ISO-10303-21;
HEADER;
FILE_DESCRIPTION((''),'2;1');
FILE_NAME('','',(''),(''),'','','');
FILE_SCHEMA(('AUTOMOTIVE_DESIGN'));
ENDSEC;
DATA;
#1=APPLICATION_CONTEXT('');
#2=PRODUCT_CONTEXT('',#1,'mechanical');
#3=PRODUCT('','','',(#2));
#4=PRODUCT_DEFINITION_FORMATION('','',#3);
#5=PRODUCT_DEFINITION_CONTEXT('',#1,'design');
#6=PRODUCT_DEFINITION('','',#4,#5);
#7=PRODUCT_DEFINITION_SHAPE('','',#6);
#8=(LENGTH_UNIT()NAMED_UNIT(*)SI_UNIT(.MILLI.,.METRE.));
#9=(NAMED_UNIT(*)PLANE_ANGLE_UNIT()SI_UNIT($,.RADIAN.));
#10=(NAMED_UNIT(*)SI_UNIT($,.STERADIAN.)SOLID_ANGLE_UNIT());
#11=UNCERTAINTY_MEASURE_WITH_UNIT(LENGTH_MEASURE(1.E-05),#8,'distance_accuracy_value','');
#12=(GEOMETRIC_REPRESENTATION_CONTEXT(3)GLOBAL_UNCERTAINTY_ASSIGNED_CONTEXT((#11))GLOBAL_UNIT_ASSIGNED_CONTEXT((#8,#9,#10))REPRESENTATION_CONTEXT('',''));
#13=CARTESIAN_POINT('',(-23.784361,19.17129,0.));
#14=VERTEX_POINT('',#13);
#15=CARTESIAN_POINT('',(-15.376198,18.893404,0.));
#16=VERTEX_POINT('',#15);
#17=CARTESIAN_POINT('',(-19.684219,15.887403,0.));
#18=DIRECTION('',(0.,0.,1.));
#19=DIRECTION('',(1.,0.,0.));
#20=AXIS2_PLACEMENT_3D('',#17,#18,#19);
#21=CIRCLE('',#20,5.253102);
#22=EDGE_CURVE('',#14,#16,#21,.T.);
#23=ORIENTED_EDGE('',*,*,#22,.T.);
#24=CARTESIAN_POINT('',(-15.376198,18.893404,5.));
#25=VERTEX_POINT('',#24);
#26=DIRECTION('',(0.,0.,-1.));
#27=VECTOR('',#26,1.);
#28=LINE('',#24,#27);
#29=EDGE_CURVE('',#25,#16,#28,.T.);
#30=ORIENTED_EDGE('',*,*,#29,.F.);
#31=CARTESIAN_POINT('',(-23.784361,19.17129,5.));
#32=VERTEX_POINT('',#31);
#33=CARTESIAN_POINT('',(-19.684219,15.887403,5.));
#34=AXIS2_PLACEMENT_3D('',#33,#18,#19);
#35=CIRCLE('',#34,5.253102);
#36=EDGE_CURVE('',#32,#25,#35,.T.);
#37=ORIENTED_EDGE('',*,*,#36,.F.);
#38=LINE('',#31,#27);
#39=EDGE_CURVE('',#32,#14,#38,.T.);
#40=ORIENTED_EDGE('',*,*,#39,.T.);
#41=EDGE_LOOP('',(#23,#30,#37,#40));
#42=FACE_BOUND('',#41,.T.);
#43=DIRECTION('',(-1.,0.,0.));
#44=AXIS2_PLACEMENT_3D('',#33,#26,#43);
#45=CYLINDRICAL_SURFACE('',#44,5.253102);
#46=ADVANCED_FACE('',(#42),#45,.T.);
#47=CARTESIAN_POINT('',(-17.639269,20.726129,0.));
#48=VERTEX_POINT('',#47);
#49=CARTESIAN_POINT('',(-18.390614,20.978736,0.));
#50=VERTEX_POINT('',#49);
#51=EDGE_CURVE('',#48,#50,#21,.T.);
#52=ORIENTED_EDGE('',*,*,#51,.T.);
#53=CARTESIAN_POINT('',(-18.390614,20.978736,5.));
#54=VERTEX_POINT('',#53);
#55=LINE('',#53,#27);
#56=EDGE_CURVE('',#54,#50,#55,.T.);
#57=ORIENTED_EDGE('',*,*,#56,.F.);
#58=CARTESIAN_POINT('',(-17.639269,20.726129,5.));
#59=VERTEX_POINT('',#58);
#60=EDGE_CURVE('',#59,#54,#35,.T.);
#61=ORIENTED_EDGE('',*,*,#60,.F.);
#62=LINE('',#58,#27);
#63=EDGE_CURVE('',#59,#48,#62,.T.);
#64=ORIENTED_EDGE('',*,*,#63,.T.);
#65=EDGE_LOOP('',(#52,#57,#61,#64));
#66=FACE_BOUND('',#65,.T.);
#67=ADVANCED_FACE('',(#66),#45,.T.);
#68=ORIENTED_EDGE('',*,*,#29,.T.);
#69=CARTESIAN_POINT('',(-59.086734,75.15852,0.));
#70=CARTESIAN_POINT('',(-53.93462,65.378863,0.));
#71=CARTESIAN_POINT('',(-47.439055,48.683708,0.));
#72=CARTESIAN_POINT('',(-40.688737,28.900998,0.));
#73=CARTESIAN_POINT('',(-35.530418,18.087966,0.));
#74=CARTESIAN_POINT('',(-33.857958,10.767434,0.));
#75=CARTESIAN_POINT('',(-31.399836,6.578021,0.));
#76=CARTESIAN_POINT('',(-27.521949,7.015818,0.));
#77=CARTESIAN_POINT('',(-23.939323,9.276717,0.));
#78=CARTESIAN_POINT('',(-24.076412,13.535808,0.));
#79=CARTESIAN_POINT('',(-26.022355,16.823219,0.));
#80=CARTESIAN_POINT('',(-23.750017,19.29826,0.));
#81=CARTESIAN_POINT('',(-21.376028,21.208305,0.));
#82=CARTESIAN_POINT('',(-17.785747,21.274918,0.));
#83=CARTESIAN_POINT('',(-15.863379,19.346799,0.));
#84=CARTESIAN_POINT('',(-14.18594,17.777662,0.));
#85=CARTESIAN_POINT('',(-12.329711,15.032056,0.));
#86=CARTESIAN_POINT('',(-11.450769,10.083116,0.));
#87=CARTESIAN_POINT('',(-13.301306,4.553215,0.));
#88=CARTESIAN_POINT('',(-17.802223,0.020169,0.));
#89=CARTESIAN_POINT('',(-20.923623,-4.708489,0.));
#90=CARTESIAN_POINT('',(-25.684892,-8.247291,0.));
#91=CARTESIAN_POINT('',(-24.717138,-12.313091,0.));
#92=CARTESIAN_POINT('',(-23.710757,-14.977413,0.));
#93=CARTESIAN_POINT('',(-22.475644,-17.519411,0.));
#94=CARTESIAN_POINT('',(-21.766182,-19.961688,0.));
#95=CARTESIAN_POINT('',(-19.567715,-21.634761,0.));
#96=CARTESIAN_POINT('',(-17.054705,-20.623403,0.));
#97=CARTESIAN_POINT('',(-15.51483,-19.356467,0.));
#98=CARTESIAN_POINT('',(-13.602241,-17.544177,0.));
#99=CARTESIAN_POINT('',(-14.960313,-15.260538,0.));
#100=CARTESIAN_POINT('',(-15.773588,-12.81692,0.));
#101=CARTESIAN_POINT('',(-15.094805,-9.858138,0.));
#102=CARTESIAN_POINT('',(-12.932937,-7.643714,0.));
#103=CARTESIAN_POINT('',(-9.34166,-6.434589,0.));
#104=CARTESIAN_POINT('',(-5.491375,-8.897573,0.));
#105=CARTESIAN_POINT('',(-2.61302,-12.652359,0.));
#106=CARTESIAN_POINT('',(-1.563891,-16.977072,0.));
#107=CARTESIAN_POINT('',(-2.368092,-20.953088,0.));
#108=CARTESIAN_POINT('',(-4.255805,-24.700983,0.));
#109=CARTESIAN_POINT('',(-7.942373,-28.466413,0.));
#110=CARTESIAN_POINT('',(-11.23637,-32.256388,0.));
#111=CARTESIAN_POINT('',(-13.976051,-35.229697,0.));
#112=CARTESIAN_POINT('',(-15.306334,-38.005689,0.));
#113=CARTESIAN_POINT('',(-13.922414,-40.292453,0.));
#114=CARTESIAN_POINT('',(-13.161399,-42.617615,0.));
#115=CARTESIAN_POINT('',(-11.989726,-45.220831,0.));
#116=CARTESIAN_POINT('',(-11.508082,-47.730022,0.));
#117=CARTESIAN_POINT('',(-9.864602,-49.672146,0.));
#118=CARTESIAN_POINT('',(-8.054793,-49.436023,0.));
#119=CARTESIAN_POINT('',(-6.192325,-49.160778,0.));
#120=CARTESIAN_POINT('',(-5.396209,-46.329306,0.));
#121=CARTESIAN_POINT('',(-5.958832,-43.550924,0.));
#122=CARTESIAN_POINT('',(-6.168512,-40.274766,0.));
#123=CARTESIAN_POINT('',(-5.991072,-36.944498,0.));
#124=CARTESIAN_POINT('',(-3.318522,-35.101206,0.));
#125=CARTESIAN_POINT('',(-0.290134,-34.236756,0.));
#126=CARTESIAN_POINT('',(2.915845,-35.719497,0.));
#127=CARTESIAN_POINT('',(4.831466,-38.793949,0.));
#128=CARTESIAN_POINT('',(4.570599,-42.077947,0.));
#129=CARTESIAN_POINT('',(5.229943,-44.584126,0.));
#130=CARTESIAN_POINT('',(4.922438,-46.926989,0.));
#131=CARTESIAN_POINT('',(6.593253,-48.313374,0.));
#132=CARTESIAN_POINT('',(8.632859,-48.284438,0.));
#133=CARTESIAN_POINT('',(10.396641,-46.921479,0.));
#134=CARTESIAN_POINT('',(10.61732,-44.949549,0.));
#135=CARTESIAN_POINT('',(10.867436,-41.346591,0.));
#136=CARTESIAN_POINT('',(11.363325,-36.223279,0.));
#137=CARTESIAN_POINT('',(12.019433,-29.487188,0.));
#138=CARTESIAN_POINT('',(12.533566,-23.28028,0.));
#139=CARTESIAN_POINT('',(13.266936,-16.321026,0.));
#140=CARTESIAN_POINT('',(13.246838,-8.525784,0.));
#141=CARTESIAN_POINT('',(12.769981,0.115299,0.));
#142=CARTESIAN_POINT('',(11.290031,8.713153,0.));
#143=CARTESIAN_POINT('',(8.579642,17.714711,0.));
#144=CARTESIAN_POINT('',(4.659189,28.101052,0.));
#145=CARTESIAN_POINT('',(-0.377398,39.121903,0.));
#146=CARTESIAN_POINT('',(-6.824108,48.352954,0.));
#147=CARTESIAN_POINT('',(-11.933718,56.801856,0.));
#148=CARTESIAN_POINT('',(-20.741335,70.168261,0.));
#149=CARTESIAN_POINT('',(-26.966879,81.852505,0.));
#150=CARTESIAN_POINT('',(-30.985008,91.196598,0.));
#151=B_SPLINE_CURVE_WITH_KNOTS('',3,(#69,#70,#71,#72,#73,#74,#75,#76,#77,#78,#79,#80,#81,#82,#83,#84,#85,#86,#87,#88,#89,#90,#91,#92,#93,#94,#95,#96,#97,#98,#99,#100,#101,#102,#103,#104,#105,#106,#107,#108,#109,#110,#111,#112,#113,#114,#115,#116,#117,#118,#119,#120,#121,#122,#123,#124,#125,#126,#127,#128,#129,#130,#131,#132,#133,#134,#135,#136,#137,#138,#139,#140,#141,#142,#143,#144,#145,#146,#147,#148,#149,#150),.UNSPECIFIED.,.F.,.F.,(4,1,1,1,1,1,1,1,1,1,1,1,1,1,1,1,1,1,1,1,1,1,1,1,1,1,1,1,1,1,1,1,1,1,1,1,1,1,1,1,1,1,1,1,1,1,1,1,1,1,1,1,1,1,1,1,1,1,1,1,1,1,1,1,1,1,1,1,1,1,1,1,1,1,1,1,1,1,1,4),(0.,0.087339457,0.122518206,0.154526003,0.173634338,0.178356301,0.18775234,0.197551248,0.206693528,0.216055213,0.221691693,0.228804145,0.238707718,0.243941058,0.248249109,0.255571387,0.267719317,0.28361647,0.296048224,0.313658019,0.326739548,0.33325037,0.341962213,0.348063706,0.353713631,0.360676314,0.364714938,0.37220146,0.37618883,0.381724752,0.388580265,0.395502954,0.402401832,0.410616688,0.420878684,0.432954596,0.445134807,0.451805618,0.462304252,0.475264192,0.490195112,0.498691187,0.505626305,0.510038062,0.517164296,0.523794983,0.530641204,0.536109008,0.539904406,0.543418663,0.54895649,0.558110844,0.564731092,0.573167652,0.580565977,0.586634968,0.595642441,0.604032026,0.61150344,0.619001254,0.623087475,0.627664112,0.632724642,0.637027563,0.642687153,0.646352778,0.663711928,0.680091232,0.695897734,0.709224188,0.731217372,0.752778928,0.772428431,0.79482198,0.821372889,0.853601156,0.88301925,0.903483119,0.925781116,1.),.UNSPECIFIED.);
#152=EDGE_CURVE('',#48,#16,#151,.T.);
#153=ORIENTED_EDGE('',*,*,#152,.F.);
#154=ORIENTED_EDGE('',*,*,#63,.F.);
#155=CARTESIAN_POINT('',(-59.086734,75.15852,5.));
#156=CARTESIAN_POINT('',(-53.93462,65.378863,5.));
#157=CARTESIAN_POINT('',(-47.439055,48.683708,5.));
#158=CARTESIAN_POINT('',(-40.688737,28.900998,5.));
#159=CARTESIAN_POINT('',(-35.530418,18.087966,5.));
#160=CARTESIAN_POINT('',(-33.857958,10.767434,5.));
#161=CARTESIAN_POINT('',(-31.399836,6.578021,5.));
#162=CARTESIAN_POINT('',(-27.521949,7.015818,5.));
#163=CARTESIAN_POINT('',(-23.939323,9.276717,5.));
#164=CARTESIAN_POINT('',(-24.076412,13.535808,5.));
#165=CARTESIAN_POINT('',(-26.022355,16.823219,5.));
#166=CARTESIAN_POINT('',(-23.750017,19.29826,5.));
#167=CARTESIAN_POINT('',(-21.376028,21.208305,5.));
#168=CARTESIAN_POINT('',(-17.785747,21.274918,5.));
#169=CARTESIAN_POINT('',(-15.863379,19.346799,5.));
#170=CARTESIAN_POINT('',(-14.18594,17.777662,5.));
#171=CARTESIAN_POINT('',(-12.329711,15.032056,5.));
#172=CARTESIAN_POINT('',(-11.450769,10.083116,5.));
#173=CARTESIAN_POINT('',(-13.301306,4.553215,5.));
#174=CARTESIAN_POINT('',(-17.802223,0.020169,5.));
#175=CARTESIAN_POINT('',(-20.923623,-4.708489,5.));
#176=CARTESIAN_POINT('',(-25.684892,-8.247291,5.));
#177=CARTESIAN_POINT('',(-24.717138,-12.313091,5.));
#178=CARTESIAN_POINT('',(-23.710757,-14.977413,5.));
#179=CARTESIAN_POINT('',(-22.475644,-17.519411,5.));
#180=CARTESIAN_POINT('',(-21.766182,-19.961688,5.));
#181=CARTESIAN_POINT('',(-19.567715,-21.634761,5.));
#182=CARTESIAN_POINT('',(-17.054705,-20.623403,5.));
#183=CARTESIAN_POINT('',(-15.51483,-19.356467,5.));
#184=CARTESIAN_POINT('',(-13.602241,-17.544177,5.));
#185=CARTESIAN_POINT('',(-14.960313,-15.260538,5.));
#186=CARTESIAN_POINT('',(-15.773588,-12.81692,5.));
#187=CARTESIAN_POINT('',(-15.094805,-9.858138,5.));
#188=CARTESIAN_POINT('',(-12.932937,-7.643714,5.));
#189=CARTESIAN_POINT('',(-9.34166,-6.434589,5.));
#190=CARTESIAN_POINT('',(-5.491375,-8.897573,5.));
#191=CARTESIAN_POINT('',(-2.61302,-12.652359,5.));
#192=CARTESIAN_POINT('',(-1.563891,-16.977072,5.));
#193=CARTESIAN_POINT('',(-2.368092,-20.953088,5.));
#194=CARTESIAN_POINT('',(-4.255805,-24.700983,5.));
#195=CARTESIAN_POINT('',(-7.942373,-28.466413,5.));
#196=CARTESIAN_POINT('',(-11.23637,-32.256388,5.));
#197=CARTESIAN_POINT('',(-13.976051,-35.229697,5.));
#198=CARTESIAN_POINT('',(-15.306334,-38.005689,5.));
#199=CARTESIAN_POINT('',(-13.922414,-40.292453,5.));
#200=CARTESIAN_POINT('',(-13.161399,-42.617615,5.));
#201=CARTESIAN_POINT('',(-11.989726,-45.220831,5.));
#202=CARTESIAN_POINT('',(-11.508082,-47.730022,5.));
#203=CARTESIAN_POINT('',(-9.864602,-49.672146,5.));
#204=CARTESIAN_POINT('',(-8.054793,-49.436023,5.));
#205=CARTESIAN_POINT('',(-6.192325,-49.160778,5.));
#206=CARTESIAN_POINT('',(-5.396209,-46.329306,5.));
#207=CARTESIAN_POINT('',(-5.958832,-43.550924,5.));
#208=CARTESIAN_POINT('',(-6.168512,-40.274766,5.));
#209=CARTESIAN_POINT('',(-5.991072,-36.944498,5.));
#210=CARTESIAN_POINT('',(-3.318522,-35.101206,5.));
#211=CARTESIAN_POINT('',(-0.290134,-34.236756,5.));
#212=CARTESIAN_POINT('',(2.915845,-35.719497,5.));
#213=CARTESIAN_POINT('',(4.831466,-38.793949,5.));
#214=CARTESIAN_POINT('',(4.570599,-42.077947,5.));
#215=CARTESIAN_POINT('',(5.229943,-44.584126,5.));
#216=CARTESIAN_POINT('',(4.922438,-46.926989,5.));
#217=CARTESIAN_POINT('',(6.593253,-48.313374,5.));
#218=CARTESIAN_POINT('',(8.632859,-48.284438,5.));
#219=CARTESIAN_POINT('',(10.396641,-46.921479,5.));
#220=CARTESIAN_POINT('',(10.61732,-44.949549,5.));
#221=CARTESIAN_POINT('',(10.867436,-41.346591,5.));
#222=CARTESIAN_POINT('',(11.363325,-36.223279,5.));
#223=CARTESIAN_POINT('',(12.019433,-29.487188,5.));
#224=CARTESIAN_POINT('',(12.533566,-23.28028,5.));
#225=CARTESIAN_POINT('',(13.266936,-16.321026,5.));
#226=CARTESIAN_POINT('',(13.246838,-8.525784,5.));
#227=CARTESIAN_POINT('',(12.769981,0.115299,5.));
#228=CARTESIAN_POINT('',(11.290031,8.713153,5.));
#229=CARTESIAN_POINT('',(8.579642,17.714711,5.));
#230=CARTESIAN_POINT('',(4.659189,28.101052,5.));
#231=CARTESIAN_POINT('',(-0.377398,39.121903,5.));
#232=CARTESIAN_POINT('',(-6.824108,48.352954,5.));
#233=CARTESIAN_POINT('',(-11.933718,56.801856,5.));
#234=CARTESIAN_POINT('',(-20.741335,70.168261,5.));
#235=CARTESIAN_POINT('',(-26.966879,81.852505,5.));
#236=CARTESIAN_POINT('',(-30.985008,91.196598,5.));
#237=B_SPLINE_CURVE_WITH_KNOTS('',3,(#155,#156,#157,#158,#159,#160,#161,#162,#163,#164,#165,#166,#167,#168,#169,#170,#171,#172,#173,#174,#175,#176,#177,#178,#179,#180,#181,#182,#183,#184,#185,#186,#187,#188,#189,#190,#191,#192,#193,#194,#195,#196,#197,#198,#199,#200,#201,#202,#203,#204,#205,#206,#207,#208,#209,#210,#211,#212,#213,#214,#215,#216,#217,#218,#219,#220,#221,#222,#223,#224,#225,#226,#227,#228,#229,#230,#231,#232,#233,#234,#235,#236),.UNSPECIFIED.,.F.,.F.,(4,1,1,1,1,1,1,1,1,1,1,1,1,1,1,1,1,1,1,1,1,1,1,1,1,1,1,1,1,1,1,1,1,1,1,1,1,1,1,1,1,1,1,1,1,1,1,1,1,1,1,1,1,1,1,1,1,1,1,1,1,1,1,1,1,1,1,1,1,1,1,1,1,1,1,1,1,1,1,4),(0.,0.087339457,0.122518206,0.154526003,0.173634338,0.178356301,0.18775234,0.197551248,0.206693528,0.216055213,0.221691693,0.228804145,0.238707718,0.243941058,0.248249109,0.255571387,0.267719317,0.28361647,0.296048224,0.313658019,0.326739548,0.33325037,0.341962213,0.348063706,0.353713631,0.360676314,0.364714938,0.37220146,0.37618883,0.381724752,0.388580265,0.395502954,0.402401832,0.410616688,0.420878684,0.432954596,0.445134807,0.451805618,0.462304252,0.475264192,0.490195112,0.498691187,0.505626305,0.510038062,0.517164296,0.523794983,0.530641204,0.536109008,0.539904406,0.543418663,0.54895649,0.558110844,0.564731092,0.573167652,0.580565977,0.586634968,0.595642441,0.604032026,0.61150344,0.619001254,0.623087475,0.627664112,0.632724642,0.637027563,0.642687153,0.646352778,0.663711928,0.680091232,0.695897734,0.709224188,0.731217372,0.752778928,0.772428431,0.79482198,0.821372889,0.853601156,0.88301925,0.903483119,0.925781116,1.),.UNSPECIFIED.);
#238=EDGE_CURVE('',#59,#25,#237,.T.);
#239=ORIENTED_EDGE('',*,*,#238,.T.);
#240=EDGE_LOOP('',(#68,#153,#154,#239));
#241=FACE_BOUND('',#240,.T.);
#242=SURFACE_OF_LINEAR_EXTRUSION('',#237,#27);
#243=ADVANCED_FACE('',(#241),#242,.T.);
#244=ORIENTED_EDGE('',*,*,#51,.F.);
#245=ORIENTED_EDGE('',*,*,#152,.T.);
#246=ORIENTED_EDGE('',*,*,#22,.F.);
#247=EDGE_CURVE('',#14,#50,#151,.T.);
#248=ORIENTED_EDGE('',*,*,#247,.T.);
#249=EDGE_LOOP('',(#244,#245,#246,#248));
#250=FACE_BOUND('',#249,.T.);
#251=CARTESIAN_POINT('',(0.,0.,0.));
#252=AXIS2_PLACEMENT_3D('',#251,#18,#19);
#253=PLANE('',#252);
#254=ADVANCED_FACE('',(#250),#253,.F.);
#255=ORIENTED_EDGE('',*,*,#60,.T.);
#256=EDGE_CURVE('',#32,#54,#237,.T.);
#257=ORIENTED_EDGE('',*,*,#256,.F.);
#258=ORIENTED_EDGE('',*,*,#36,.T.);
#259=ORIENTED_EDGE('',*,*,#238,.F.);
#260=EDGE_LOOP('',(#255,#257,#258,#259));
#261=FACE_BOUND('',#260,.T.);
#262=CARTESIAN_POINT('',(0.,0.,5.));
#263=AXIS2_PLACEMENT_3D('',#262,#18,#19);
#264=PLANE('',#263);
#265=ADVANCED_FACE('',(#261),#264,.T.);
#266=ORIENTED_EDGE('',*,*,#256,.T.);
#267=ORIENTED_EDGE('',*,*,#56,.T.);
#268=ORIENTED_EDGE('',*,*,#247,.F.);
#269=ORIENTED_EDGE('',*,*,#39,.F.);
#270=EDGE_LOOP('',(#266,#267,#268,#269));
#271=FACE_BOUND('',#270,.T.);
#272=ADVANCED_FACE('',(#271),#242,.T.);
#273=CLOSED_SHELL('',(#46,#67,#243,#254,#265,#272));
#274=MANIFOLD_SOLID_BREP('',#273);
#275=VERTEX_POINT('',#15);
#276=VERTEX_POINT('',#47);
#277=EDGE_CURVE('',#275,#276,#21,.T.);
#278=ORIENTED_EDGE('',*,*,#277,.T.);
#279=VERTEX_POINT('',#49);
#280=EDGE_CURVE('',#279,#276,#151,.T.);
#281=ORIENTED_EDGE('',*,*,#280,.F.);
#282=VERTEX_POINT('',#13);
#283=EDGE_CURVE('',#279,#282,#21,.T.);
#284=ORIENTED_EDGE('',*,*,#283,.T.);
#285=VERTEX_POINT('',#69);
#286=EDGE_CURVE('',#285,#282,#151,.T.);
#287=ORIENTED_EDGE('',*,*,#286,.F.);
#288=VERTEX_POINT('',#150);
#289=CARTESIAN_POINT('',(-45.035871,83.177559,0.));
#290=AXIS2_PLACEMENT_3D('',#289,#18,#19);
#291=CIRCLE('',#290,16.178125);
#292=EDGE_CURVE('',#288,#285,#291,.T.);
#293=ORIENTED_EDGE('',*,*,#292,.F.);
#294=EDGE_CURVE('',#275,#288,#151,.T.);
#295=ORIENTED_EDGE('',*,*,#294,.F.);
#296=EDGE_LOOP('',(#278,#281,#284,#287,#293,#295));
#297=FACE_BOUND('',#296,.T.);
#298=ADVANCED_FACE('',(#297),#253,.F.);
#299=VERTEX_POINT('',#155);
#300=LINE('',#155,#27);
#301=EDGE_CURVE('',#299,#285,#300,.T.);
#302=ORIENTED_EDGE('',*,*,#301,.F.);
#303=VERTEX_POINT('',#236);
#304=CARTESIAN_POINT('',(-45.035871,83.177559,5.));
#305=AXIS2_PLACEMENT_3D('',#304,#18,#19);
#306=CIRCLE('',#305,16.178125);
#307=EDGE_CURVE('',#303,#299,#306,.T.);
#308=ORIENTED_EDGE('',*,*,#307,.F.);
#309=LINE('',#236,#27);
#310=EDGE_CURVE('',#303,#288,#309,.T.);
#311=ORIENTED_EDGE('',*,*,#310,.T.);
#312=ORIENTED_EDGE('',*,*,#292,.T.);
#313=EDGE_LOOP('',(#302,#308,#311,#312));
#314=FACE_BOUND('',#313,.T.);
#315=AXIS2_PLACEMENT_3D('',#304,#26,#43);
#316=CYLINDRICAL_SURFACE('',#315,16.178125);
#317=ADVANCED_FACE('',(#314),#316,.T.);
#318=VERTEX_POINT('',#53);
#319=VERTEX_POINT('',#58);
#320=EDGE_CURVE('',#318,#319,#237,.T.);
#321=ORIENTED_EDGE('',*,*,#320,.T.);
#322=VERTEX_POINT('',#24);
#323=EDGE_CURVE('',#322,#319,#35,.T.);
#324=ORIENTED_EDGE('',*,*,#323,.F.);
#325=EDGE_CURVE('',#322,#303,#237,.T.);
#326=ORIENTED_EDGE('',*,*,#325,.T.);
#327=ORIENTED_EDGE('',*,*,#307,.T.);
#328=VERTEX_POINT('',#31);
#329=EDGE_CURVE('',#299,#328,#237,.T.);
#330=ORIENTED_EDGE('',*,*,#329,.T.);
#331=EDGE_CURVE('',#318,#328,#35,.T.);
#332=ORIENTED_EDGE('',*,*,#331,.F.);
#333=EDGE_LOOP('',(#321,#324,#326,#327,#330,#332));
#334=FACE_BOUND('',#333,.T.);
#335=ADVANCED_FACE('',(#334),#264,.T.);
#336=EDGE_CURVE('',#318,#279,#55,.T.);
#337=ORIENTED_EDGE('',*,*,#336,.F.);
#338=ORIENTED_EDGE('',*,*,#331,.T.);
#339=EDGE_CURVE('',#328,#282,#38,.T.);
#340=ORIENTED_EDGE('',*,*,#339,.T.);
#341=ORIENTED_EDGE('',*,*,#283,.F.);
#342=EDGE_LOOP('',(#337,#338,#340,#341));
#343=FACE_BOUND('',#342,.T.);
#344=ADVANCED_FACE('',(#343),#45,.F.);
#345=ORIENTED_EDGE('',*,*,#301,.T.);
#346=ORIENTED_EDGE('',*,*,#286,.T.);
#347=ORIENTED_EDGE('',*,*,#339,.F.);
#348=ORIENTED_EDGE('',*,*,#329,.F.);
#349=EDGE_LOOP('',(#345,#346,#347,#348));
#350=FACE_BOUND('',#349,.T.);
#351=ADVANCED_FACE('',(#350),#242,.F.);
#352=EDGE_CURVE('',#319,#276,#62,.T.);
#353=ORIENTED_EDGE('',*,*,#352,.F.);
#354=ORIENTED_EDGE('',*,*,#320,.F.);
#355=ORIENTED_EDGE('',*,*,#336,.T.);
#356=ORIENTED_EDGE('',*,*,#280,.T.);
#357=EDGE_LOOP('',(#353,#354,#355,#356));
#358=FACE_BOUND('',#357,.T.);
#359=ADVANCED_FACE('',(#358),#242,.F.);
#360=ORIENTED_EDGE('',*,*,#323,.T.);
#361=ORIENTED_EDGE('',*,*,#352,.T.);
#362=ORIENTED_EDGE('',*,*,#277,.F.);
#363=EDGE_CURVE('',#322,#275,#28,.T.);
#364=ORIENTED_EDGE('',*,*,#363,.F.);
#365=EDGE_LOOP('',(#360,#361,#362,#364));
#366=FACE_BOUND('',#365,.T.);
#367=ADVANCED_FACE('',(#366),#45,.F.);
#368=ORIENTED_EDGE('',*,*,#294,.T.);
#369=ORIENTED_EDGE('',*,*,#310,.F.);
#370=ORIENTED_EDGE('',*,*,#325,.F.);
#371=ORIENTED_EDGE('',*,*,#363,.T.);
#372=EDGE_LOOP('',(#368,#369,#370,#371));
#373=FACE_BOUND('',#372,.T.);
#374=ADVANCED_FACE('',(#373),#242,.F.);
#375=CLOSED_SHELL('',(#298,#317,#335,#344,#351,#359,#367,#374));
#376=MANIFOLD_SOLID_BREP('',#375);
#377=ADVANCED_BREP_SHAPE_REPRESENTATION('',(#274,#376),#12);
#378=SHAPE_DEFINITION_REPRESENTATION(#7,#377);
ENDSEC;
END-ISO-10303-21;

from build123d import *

# Parameters (mm, degrees)
BOSS_EXTRUDE1_DEPTH = 5
BOSS_EXTRUDE2_DEPTH = 5


with BuildPart() as part:
    # Sketch1 → Boss-Extrude1 (new body)
    with BuildSketch(Plane.XY):
        with BuildLine():
            add(Edge.make_bspline(
                [(-15.376197871, 18.89340422), (-15.082221931, 18.609658247), (-14.082413013, 17.624532827), (-12.329710699, 15.032055724), (-11.450768513, 10.083116207), (-13.301306093, 4.553215231), (-17.802222663, 0.020169412), (-20.92362336, -4.708488512), (-25.684891915, -8.247291068), (-24.7171376, -12.313090845), (-23.710756791, -14.977413167), (-22.475643776, -17.519411113), (-21.766182041, -19.961688271), (-19.567714742, -21.634761452), (-17.054705023, -20.623403245), (-15.514830328, -19.356466702), (-13.602241321, -17.544176686), (-14.960313044, -15.260538239), (-15.773587706, -12.816920275), (-15.094805219, -9.858138299), (-12.932936902, -7.643713981), (-9.341660228, -6.434588786), (-5.491374991, -8.897572671), (-2.613019676, -12.652358716), (-1.563890844, -16.977072215), (-2.368091716, -20.95308758), (-4.255805257, -24.700983393), (-7.942373056, -28.466412654), (-11.236370467, -32.256388462), (-13.97605086, -35.229697097), (-15.306334243, -38.005688937), (-13.922413953, -40.292452866), (-13.161399044, -42.61761536), (-11.989725545, -45.22083061), (-11.508081611, -47.730022002), (-9.864601865, -49.672146273), (-8.054793358, -49.436023324), (-6.192324987, -49.160777502), (-5.396208815, -46.329305908), (-5.958832199, -43.550924044), (-6.168512168, -40.274765919), (-5.991072136, -36.944497525), (-3.318522169, -35.101206067), (-0.290133932, -34.236756277), (2.915844901, -35.719496977), (4.831465659, -38.793949272), (4.570599211, -42.07794731), (5.229943091, -44.584125896), (4.922437711, -46.926989326), (6.593253274, -48.31337356), (8.632859256, -48.284437582), (10.396641074, -46.921479009), (10.617319534, -44.949548528), (10.867436211, -41.346590576), (11.363324993, -36.223279467), (12.019433, -29.487187687), (12.533565674, -23.28027968), (13.266936139, -16.321026149), (13.246838304, -8.525784247), (12.769980947, 0.115298958), (11.290030545, 8.713153258), (8.579641588, 17.714711088), (4.659189351, 28.101051635), (-0.377397826, 39.121903113), (-6.824107734, 48.352954408), (-11.933718441, 56.801855673), (-20.741334725, 70.168260911), (-26.966879034, 81.852505207), (-30.985007938, 91.196598098)],
                knots=[0.245267232, 0.245267232, 0.245267232, 0.245267232, 0.248249109, 0.255571387, 0.267719317, 0.28361647, 0.296048224, 0.313658019, 0.326739548, 0.33325037, 0.341962213, 0.348063706, 0.353713631, 0.360676314, 0.364714938, 0.37220146, 0.37618883, 0.381724752, 0.388580265, 0.395502954, 0.402401832, 0.410616688, 0.420878684, 0.432954596, 0.445134807, 0.451805618, 0.462304252, 0.475264192, 0.490195112, 0.498691187, 0.505626305, 0.510038062, 0.517164296, 0.523794983, 0.530641204, 0.536109008, 0.539904406, 0.543418663, 0.54895649, 0.558110844, 0.564731092, 0.573167652, 0.580565977, 0.586634968, 0.595642441, 0.604032026, 0.61150344, 0.619001254, 0.623087475, 0.627664112, 0.632724642, 0.637027563, 0.642687153, 0.646352778, 0.663711928, 0.680091232, 0.695897734, 0.709224188, 0.731217372, 0.752778928, 0.772428431, 0.79482198, 0.821372889, 0.853601156, 0.88301925, 0.903483119, 0.925781116, 1, 1, 1, 1], degree=3))
            ThreePointArc((-30.985007938, 91.196598098), (-53.054909921, 97.228421688), (-59.086733511, 75.158519704))
            add(Edge.make_bspline(
                [(-59.086733511, 75.158519704), (-53.934620409, 65.378862846), (-47.439055451, 48.683708271), (-40.688736558, 28.900997928), (-35.530418372, 18.087965765), (-33.857957781, 10.767434307), (-31.3998363, 6.578021067), (-27.521949237, 7.015818016), (-23.939322958, 9.276717273), (-24.076411695, 13.535807514), (-26.022354803, 16.823219465), (-24.443895554, 18.542484515), (-23.821825049, 19.135891662), (-23.784361274, 19.171290272)],
                knots=[0, 0, 0, 0, 0.087339457, 0.122518206, 0.154526003, 0.173634338, 0.178356301, 0.18775234, 0.197551248, 0.206693528, 0.216055213, 0.221691693, 0.222052473, 0.222052473, 0.222052473, 0.222052473], degree=3))
            ThreePointArc((-23.784361274, 19.171290272), (-21.353313982, 20.868287258), (-18.39061408, 20.978736329))
            add(Edge.make_bspline(
                [(-18.39061408, 20.978736329), (-18.130086369, 20.917885362), (-17.877883774, 20.834146371), (-17.639269045, 20.726128953)],
                knots=[0.236246142, 0.236246142, 0.236246142, 0.236246142, 0.238158412, 0.238158412, 0.238158412, 0.238158412], degree=3))
            ThreePointArc((-17.639269045, 20.726128953), (-16.378197146, 19.969719627), (-15.376197871, 18.89340422))
        make_face()
    extrude(amount=BOSS_EXTRUDE1_DEPTH)


with BuildPart() as body_2:
    # Sketch1<3> → Boss-Extrude2 (new body)
    with BuildSketch(Plane.XY):
        with BuildLine():
            ThreePointArc((-14.431116363, 15.887403482), (-14.672953468, 17.462936685), (-15.376197871, 18.89340422))
            add(Edge.make_bspline(
                [(-17.639269045, 20.726128953), (-17.570726219, 20.695100612), (-16.860965496, 20.347369864), (-16.158173354, 19.642474893), (-15.506942095, 19.019598721), (-15.376197871, 18.89340422)],
                knots=[0.238158412, 0.238158412, 0.238158412, 0.238158412, 0.238707718, 0.243941058, 0.245267232, 0.245267232, 0.245267232, 0.245267232], degree=3))
            ThreePointArc((-17.639269045, 20.726128953), (-18.010170079, 20.866624745), (-18.39061408, 20.978736329))
            add(Edge.make_bspline(
                [(-23.784361274, 19.171290272), (-23.083260011, 19.833743811), (-21.578736599, 21.006070895), (-19.404512048, 21.215550567), (-18.39061408, 20.978736329)],
                knots=[0.222052473, 0.222052473, 0.222052473, 0.222052473, 0.228804145, 0.236246142, 0.236246142, 0.236246142, 0.236246142], degree=3))
            ThreePointArc((-23.784361274, 19.171290272), (-21.424421713, 10.930915239), (-14.431116363, 15.887403482))
        make_face()
    extrude(amount=BOSS_EXTRUDE2_DEPTH)


solid = Compound([part.part, body_2.part])
